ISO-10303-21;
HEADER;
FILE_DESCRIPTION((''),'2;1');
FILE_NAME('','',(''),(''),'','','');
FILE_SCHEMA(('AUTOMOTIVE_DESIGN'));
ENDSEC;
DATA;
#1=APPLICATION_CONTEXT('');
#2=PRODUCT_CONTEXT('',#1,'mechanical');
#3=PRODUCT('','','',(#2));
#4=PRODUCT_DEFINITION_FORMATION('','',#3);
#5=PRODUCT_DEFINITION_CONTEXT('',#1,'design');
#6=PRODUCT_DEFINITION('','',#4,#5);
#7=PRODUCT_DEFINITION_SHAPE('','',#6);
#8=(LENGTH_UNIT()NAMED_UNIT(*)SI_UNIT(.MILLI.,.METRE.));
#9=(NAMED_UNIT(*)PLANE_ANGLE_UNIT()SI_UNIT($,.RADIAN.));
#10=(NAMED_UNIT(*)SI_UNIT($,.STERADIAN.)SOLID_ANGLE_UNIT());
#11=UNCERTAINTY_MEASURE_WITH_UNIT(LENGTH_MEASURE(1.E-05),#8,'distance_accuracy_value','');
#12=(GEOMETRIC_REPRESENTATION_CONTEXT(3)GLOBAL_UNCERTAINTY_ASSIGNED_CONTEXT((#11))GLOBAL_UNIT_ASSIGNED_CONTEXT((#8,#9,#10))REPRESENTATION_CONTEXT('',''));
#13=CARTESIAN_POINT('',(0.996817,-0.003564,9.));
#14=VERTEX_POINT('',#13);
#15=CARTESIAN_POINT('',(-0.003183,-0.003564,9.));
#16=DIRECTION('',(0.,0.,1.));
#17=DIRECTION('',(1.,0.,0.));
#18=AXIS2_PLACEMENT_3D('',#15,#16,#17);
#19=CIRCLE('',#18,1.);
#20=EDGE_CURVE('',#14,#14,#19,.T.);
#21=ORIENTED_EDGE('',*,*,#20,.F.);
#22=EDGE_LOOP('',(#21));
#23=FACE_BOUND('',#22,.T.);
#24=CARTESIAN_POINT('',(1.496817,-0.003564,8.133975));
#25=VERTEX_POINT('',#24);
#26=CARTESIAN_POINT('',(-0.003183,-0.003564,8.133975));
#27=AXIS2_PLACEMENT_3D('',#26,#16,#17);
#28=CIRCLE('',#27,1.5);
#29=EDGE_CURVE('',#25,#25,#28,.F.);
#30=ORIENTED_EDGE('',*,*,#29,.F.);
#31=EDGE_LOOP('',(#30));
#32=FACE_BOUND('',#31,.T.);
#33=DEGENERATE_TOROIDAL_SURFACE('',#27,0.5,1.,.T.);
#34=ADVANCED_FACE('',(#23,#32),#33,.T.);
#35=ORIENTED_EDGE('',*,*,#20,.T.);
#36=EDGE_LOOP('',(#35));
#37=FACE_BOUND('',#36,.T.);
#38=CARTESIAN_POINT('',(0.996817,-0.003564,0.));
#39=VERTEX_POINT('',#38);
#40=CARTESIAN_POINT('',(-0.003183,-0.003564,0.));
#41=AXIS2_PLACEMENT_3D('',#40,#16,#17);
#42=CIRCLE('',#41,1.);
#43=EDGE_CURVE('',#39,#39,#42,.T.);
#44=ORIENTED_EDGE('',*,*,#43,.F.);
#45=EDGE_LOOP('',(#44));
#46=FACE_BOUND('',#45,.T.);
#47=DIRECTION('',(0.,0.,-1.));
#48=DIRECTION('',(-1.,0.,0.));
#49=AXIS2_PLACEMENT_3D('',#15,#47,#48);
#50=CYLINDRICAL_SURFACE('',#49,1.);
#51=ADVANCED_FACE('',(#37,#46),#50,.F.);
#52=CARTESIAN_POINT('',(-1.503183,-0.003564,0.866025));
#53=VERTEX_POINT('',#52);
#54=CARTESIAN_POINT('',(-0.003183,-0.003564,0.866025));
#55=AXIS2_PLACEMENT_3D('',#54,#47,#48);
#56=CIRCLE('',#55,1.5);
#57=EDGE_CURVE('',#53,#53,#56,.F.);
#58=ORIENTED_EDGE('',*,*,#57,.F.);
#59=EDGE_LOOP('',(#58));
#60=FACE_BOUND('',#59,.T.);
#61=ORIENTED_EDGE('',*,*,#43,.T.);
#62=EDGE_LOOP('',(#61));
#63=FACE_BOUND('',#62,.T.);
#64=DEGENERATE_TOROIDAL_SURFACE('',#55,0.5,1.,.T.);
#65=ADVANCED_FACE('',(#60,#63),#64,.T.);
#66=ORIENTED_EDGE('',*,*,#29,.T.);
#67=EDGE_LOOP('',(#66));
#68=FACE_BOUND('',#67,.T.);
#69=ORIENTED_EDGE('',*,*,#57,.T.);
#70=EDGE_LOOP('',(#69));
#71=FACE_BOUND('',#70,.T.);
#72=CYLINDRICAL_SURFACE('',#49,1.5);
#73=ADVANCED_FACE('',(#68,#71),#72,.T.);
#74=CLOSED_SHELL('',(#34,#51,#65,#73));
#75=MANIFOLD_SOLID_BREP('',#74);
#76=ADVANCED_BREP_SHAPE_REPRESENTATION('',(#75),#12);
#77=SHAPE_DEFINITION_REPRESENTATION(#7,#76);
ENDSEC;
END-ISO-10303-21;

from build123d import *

# Parameters (mm, degrees)
SKETCH1_R           = 1.5
SKETCH1_R_2         = 1
BOSS_EXTRUDE1_DEPTH = 9
FILLET1_R           = 1


with BuildPart() as part:
    # Sketch1 → Boss-Extrude1 (new body)
    with BuildSketch(Plane.XY):
        with Locations((-0.00318309, -0.003564359)):
            Circle(SKETCH1_R)
        with Locations((-0.00318309, -0.003564359)):
            Circle(SKETCH1_R_2, mode=Mode.SUBTRACT)
    extrude(amount=BOSS_EXTRUDE1_DEPTH)

    # Fillet1
    # the kernel refuses this fillet: 1 mm, written as the material it takes off along each edge
    with BuildSketch(Plane(origin=(-0.00318309, -0.003564359, 0), x_dir=(1, 0, 0), z_dir=(0, -1, 0))) as fillet1_piece_1:
        with BuildLine():
            CenterArc((0.5, 0.866025404), FILLET1_R, 300, 60)
            Line((1, 0), (1.01, -0.017320508))
            ThreePointArc((1.01, -0.017320508), (1.25, -0.02), (1.5, -0.02))
            Line((1.5, -0.02), (1.52, 0))
            Line((1.52, 0), (1.52, 0.866025404))
            Line((1.52, 0.866025404), (1.5, 0.866025404))
        make_face()
    revolve(axis=Axis((-0.00318309, -0.003564359, 0), (0, 0, 1)), mode=Mode.SUBTRACT)
    with BuildSketch(Plane(origin=(-0.00318309, -0.003564359, 9), x_dir=(1, 0, 0), z_dir=(0, -1, 0))) as fillet1_piece_2:
        with BuildLine():
            CenterArc((0.5, -0.866025404), FILLET1_R, 0, 60)
            Line((1, 0), (1.01, 0.017320508))
            ThreePointArc((1.01, 0.017320508), (1.25, 0.02), (1.5, 0.02))
            Line((1.5, 0.02), (1.52, 0))
            Line((1.52, 0), (1.52, -0.866025404))
            Line((1.52, -0.866025404), (1.5, -0.866025404))
        make_face()
    revolve(axis=Axis((-0.00318309, -0.003564359, 9), (0, 0, 1)), mode=Mode.SUBTRACT)


solid = part.part
